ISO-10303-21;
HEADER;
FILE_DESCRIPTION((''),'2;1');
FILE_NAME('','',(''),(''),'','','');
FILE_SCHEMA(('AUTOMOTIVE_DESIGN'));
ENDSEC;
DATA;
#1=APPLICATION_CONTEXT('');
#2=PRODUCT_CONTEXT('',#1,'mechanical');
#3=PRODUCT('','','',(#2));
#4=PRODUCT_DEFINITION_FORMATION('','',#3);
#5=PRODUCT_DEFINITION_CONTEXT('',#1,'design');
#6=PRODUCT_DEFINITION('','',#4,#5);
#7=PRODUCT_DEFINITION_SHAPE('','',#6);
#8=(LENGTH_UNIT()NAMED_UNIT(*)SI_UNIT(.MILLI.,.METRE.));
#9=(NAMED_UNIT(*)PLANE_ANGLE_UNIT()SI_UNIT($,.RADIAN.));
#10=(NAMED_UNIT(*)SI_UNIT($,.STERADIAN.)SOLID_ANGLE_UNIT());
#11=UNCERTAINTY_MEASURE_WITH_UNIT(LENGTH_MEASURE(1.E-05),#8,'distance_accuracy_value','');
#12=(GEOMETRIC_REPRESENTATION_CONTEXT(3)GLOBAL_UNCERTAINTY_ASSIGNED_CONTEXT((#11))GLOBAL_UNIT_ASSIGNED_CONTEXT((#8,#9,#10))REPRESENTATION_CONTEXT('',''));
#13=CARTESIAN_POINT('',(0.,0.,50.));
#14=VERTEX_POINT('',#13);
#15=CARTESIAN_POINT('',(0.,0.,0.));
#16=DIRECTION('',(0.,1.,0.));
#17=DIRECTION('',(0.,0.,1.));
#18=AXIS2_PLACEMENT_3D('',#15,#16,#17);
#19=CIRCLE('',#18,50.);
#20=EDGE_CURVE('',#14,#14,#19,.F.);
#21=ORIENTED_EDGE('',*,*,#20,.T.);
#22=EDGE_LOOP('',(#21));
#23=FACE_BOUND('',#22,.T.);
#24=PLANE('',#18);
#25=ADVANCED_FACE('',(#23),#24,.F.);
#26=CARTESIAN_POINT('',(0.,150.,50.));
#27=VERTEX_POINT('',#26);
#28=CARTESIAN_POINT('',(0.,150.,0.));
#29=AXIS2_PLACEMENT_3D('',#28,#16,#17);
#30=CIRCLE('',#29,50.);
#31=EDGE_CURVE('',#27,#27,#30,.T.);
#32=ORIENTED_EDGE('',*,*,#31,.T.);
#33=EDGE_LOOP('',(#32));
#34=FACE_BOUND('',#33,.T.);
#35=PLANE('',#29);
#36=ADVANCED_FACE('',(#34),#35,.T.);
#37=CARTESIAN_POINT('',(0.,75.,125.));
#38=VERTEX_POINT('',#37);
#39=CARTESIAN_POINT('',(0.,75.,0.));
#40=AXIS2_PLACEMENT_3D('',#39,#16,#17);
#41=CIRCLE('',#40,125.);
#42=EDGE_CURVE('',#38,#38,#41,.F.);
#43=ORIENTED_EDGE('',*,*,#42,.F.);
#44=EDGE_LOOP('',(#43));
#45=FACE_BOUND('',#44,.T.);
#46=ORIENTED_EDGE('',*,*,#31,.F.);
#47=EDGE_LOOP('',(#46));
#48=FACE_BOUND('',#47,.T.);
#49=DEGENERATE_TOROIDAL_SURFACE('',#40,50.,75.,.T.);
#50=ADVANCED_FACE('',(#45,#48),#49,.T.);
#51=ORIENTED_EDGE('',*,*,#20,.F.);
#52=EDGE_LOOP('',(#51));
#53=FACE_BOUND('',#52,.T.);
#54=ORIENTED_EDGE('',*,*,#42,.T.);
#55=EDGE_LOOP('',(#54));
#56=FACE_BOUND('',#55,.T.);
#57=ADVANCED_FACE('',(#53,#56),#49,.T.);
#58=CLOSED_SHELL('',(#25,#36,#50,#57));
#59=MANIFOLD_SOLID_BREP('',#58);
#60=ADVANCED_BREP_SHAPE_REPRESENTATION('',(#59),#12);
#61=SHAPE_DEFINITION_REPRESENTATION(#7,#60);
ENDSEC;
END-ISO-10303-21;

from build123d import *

# Parameters (mm, degrees)
SKETCH2_R           = 125
BOSS_EXTRUDE1_DEPTH = 150
FILLET2_R           = 75


with BuildPart() as part:
    # Sketch2 → Boss-Extrude1 (new body)
    with BuildSketch(Plane(origin=(0, 0, 0), x_dir=(1, 0, 0), z_dir=(0, 1, 0))):
        with Locations(Location((0, 0, 0), (0, 0, 270))):
            Circle(SKETCH2_R)
    extrude(amount=BOSS_EXTRUDE1_DEPTH)

    # Fillet2
    fillet2_edges = [part.edges().sort_by_distance(p)[0] for p in [
        (0, 0, -125),
        (0, 150, -125),
    ]]
    fillet(fillet2_edges, radius=FILLET2_R - 0.0001)  # a hair under: the kernel refuses the full size


solid = part.part
